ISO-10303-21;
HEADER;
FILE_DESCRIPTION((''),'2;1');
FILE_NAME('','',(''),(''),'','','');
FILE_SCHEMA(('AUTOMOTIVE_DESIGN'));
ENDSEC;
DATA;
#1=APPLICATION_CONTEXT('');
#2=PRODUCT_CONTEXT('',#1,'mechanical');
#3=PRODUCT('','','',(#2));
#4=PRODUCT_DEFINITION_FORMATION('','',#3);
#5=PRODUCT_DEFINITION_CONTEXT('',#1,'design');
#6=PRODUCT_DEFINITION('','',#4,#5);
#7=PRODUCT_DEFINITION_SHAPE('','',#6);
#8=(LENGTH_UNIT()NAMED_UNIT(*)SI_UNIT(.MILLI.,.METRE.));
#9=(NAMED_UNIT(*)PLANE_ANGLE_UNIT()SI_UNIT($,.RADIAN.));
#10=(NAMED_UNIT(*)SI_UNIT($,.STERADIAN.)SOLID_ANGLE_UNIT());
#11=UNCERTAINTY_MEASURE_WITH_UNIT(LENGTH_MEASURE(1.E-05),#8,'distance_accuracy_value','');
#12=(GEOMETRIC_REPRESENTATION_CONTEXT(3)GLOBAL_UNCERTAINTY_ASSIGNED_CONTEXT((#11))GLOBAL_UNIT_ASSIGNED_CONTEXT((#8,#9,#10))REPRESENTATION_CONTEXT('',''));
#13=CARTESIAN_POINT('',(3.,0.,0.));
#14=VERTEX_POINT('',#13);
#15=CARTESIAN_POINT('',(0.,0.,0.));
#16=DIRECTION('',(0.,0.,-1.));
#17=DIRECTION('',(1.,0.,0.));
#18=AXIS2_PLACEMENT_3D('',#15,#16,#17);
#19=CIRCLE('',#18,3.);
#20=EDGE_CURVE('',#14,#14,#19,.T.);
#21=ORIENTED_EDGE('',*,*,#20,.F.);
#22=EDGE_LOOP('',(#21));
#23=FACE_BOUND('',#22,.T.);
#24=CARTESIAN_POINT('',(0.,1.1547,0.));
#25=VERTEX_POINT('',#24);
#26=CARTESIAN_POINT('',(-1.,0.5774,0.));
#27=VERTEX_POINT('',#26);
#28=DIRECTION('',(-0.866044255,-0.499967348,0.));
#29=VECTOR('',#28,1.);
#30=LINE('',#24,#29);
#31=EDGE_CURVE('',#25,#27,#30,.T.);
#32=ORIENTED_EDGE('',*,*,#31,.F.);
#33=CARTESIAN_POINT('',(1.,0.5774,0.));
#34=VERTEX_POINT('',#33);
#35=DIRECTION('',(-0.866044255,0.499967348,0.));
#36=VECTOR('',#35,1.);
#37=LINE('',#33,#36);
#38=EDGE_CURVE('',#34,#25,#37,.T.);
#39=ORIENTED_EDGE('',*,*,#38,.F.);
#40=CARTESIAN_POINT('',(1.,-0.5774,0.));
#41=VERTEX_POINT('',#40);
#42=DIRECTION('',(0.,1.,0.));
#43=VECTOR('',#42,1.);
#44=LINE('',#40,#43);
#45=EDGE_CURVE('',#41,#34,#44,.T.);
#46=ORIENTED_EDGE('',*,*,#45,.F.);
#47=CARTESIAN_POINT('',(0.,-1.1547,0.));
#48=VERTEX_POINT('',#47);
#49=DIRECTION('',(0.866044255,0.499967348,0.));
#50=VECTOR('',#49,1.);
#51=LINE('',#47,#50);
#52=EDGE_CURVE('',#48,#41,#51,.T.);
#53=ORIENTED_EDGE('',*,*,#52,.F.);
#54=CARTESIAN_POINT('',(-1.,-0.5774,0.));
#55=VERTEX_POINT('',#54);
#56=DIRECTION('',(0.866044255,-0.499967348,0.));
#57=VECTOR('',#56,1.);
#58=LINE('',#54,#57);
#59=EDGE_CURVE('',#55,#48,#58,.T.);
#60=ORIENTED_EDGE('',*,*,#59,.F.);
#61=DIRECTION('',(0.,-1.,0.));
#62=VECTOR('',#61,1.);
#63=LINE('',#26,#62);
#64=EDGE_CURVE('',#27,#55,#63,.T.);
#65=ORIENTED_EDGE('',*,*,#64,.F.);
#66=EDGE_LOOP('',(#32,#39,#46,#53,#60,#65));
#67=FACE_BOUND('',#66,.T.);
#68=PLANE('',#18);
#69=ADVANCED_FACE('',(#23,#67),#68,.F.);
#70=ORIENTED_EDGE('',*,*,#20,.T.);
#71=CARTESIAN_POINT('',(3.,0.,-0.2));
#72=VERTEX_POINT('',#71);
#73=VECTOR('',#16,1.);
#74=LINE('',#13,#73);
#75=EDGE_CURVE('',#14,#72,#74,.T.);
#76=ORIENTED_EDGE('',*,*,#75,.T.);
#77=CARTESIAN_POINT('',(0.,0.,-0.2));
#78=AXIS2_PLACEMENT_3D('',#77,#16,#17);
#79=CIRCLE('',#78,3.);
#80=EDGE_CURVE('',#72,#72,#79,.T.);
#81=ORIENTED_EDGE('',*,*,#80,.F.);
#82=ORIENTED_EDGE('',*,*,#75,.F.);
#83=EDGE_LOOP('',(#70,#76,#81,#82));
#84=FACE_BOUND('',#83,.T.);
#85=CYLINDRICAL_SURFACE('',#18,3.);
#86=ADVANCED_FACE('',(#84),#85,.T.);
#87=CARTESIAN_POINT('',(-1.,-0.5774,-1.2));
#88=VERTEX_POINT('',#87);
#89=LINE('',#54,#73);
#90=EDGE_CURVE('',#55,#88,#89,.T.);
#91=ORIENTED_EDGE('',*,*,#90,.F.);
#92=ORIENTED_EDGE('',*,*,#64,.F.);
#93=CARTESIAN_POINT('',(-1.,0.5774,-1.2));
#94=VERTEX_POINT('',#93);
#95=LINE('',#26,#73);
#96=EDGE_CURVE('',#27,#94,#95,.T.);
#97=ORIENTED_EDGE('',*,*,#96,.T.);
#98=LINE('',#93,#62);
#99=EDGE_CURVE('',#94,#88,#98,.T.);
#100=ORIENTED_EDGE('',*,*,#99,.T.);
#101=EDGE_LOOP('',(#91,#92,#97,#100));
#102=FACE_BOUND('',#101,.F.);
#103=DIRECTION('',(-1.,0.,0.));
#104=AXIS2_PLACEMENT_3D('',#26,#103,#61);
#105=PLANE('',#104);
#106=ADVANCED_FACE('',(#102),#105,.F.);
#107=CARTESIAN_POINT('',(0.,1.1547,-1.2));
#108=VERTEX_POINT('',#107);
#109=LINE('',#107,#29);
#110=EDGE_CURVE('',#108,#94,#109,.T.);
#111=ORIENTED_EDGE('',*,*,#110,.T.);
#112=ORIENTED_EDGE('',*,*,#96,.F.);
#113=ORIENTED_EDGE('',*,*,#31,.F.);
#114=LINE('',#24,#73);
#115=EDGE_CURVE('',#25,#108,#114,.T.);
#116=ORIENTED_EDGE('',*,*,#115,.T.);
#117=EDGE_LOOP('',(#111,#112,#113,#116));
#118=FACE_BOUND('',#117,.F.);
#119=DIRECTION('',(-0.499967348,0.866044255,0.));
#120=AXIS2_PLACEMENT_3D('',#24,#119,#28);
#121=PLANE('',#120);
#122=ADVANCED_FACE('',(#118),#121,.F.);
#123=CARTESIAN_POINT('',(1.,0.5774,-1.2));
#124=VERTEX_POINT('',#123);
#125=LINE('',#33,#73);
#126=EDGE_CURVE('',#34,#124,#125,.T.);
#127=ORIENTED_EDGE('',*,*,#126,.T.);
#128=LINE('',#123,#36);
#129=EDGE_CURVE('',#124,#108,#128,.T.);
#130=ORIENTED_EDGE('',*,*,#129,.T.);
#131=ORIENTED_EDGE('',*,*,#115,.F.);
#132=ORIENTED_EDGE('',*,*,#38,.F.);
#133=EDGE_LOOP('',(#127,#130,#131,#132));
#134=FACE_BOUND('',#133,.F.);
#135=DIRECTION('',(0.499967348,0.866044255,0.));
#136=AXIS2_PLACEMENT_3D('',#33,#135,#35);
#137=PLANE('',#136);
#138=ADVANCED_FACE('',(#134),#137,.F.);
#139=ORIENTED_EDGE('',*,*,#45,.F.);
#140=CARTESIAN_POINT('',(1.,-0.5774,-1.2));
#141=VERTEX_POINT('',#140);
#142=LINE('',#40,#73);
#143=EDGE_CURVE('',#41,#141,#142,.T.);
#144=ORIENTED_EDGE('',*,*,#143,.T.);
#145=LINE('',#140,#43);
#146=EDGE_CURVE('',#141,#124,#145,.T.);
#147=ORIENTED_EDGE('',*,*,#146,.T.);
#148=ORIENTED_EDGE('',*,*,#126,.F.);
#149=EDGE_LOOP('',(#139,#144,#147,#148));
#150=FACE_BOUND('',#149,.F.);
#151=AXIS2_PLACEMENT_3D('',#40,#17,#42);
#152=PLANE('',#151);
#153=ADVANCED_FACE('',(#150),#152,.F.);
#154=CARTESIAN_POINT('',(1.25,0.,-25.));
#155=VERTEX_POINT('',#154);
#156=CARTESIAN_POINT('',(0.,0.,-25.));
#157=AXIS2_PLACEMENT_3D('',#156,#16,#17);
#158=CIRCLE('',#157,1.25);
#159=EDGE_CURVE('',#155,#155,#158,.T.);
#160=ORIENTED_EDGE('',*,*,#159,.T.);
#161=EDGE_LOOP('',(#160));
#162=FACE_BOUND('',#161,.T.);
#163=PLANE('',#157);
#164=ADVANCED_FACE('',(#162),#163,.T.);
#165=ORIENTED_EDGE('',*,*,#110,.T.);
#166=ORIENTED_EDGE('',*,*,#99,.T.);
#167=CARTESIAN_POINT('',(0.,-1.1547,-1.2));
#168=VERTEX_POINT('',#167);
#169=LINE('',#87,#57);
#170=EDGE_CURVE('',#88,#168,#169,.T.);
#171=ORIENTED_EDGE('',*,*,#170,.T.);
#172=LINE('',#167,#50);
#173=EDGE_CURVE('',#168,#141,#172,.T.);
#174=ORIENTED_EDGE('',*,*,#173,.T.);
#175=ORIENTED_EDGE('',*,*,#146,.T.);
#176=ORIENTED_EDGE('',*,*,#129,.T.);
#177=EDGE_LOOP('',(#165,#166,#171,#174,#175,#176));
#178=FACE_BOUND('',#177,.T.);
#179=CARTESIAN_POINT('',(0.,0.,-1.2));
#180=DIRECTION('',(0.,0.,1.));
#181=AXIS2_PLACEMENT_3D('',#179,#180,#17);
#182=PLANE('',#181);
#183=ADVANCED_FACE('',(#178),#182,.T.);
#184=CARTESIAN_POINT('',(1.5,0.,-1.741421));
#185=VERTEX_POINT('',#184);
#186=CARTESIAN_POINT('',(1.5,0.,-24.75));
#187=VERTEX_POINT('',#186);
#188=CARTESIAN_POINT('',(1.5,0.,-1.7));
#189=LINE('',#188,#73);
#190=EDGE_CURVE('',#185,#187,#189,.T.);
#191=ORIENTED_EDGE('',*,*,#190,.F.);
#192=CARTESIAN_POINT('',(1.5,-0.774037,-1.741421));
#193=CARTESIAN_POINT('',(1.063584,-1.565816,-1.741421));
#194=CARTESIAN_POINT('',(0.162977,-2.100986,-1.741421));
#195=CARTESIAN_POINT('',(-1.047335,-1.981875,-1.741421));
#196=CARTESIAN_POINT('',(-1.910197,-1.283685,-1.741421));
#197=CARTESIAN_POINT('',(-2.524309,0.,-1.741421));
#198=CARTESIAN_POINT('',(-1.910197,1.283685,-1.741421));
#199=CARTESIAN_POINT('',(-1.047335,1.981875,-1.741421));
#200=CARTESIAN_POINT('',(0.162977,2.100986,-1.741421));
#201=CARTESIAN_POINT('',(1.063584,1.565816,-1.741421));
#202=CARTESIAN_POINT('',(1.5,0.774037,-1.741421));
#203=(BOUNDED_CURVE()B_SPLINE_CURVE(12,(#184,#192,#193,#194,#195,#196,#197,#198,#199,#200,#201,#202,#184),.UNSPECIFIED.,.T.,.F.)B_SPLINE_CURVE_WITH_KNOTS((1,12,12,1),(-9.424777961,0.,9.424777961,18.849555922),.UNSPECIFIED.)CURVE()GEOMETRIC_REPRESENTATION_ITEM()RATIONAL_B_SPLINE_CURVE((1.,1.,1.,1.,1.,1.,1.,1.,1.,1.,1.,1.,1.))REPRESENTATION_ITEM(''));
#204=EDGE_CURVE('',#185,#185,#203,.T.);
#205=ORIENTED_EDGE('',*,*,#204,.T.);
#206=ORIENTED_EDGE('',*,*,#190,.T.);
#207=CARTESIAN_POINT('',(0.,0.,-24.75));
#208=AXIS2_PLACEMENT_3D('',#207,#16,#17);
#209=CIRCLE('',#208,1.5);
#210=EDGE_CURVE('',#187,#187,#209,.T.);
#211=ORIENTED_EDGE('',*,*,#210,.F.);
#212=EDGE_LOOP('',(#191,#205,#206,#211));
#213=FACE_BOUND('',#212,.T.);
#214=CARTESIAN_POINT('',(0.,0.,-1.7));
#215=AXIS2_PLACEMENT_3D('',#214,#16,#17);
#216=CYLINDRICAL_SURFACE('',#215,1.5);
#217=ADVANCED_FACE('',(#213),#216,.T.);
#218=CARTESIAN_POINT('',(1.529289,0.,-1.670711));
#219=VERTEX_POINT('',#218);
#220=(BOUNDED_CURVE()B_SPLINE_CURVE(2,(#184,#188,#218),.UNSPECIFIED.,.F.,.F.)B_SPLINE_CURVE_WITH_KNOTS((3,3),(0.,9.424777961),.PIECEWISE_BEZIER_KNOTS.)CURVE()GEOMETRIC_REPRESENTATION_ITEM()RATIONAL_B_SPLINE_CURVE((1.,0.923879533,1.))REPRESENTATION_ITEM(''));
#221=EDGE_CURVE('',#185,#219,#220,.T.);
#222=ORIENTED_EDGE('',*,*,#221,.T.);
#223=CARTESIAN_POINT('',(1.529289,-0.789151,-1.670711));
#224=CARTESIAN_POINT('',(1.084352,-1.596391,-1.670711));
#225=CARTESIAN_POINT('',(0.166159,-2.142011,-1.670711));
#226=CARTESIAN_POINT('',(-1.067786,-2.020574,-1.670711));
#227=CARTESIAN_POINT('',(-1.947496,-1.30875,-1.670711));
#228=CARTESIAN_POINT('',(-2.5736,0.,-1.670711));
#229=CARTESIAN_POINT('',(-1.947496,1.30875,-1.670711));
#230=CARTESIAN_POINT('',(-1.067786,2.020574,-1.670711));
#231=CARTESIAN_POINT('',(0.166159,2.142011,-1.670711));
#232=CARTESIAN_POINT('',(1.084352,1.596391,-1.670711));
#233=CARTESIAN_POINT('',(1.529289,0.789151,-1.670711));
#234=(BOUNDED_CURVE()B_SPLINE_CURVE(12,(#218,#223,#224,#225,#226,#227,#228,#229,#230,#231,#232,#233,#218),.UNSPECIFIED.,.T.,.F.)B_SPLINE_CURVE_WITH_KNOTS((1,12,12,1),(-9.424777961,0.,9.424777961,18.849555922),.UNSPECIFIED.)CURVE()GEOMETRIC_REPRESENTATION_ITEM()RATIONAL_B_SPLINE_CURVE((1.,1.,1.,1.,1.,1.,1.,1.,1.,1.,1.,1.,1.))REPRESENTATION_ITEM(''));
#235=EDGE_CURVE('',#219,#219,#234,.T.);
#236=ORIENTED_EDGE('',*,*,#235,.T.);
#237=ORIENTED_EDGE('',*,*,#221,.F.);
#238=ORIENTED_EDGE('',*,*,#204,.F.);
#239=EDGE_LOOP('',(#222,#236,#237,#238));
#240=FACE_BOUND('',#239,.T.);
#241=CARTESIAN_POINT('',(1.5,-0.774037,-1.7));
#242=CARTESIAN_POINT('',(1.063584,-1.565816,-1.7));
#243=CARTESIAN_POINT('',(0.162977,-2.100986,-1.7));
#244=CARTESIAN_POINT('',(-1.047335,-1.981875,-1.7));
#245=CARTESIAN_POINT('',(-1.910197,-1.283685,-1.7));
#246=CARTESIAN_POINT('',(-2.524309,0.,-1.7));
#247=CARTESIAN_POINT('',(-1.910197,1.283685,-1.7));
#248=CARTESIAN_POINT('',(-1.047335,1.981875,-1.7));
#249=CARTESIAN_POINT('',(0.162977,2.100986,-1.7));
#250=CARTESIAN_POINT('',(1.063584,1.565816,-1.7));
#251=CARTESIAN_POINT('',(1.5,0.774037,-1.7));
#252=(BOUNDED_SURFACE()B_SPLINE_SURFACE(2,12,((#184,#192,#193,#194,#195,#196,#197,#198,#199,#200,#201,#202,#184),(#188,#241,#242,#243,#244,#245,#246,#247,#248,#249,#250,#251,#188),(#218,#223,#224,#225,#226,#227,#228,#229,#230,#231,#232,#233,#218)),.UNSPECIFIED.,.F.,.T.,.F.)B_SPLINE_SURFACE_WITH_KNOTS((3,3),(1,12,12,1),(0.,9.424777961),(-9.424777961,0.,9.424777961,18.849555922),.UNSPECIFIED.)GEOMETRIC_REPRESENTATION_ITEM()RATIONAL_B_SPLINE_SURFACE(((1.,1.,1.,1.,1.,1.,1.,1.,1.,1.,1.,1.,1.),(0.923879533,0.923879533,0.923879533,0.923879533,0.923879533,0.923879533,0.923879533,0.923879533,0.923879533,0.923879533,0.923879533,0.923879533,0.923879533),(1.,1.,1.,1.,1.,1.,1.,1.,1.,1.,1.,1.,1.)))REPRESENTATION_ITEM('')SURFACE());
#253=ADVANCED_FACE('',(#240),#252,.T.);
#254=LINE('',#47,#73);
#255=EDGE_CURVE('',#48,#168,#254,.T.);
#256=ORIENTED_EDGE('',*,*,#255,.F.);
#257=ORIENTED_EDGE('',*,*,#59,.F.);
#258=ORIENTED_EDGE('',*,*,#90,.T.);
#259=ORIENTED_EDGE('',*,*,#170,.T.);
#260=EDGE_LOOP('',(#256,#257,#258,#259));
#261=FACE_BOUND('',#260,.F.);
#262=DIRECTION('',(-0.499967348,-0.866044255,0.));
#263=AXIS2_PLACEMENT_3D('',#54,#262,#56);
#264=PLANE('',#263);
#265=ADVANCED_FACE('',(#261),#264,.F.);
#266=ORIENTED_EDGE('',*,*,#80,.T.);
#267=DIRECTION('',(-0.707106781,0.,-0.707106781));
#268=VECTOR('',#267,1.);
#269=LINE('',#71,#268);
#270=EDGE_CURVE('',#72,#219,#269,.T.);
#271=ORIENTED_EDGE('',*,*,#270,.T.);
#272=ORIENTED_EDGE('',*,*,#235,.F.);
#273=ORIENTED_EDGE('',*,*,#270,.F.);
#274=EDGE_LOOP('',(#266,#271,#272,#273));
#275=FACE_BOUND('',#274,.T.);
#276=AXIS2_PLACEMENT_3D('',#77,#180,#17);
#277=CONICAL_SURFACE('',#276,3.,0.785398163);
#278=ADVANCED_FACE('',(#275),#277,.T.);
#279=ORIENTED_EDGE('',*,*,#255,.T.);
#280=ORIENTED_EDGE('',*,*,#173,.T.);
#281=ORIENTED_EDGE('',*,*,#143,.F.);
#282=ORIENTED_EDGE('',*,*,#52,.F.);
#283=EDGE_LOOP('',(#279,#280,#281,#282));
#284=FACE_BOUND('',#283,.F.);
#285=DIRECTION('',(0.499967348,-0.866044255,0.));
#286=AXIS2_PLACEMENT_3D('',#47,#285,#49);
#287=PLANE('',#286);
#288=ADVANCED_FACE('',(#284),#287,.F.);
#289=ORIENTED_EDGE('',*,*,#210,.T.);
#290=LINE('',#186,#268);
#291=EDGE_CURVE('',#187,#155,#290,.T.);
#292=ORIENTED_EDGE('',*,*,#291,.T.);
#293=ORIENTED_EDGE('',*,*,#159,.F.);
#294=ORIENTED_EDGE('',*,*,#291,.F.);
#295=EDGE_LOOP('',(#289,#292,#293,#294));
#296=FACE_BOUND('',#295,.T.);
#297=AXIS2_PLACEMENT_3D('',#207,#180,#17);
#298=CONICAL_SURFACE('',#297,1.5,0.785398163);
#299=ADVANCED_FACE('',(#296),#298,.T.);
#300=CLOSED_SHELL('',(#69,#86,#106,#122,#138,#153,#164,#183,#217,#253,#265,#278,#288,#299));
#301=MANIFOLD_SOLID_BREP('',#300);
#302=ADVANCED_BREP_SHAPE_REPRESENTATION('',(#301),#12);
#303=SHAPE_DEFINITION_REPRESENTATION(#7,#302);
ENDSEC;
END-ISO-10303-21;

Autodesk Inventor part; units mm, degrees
ref_plane "YZ Plane" through (0, 0, 0) normal (1, 0, 0) x (0, 1, 0)
sketch "Sketch1" plane through (0, 0, 0) normal (0, 1, 0) x (-1, 0, 0)
  point P0 (0, 0)
sketch "Sketch2" plane through (0, 0, 0) normal (0, 1, 0) x (-1, 0, 0)
  line L0 (-1.5, -25) -> (0, -25)
  line L1 (-1.5, -1.7) -> (-1.5, -25)
  line L2 (-3, -0.2) -> (-1.5, -1.7)
  line L3 (-3, 0) -> (-3, -0.2)
  line L4 (0, 0) -> (-3, 0)
  line L5 (0, -25) -> (0, 0)
  line L6 (0, -25) -> (0, 0)
  line L7 (0, -30) -> (0, 5) projected
  line L8 (0.6, 0) -> (-3.6, 0) projected
  dimension "d3" = 3
  dimension "d5" = 1.5
  dimension "d7" = 25
  dimension "ParC" = 0.2
  dimension "d22" = 0
  dimension "d23" = 0
  dimension "d43" = 45
revolve "Revolution1" add sketch "Sketch2" angle 360 about axis through (0, 0, -25) along (0, 0, -1)
sketch "Sketch3" plane through (0, 0, 0) normal (0, 0, 1) x (1, 0, 0)
  line L0 (-1, 0.5774) -> (-1, -0.5774)
  line L1 (0, 1.1547) -> (-1, 0.5774)
  line L2 (1, 0.5774) -> (0, 1.1547)
  line L3 (1, -0.5774) -> (1, 0.5774)
  line L4 (0, -1.1547) -> (1, -0.5774)
  line L5 (-1, -0.5774) -> (0, -1.1547)
  circle A0 centre (0, 0) radius 1 construction
  circle A1 centre (0, 0) radius 1.5 construction
  dimension "d11" = 2
  dimension "d13" = 120
  dimension "d15" = 120
extrude "Extrusion1" cut sketch "Sketch3" against normal blind 1.2
fillet "Fillet1" radius 0.1 1 edges at (-1.5, 0, -1.7)
chamfer "Chamfer1" distance 0.25 angle 45 1 edges at (-1.5, 0, -25) measured on face at (1.4041, 0.5277, -17.2471)
thread "Thread1" size "M3x0.5" class "6g" standard "ISO Metric profile" length 12
ref_plane "MSC_PF1" through (0, 0, 0) normal (1, 0, 0) x (0, 1, 0)
ref_plane "MSC_PT1" through (0, 0, 0) normal (0, 0, -1) x (-1, 0, 0)
equation "\"d3\" = 0.5 * dk"
equation "\"d5\" = 0.5 * NND"
equation "\"d7\" = NLG"
equation "\"d43\" = 0.5 * ang"
equation "\"d18\" = r"
equation "\"d19\" = 0.5 * PTC"
equation "\"d39\" = 0.5 * PTC"
equation "\"d11\" = ParS"
equation "\"d16\" = ParT"
equation "\"NND\" = 3"
equation "\"PTC\" = 0.5"
equation "\"dk\" = 6"
equation "\"ParK\" = 1.7"
equation "\"ParS\" = 2"
equation "\"ParT\" = 1.2"
equation "\"r\" = 0.1"
equation "\"NLG\" = 25"
equation "\"ang\" = 90deg"
equation "\"THREADDIA\" = NND"
properties part number "DIN 7991 - M3x25" material "Steel, Mild"
